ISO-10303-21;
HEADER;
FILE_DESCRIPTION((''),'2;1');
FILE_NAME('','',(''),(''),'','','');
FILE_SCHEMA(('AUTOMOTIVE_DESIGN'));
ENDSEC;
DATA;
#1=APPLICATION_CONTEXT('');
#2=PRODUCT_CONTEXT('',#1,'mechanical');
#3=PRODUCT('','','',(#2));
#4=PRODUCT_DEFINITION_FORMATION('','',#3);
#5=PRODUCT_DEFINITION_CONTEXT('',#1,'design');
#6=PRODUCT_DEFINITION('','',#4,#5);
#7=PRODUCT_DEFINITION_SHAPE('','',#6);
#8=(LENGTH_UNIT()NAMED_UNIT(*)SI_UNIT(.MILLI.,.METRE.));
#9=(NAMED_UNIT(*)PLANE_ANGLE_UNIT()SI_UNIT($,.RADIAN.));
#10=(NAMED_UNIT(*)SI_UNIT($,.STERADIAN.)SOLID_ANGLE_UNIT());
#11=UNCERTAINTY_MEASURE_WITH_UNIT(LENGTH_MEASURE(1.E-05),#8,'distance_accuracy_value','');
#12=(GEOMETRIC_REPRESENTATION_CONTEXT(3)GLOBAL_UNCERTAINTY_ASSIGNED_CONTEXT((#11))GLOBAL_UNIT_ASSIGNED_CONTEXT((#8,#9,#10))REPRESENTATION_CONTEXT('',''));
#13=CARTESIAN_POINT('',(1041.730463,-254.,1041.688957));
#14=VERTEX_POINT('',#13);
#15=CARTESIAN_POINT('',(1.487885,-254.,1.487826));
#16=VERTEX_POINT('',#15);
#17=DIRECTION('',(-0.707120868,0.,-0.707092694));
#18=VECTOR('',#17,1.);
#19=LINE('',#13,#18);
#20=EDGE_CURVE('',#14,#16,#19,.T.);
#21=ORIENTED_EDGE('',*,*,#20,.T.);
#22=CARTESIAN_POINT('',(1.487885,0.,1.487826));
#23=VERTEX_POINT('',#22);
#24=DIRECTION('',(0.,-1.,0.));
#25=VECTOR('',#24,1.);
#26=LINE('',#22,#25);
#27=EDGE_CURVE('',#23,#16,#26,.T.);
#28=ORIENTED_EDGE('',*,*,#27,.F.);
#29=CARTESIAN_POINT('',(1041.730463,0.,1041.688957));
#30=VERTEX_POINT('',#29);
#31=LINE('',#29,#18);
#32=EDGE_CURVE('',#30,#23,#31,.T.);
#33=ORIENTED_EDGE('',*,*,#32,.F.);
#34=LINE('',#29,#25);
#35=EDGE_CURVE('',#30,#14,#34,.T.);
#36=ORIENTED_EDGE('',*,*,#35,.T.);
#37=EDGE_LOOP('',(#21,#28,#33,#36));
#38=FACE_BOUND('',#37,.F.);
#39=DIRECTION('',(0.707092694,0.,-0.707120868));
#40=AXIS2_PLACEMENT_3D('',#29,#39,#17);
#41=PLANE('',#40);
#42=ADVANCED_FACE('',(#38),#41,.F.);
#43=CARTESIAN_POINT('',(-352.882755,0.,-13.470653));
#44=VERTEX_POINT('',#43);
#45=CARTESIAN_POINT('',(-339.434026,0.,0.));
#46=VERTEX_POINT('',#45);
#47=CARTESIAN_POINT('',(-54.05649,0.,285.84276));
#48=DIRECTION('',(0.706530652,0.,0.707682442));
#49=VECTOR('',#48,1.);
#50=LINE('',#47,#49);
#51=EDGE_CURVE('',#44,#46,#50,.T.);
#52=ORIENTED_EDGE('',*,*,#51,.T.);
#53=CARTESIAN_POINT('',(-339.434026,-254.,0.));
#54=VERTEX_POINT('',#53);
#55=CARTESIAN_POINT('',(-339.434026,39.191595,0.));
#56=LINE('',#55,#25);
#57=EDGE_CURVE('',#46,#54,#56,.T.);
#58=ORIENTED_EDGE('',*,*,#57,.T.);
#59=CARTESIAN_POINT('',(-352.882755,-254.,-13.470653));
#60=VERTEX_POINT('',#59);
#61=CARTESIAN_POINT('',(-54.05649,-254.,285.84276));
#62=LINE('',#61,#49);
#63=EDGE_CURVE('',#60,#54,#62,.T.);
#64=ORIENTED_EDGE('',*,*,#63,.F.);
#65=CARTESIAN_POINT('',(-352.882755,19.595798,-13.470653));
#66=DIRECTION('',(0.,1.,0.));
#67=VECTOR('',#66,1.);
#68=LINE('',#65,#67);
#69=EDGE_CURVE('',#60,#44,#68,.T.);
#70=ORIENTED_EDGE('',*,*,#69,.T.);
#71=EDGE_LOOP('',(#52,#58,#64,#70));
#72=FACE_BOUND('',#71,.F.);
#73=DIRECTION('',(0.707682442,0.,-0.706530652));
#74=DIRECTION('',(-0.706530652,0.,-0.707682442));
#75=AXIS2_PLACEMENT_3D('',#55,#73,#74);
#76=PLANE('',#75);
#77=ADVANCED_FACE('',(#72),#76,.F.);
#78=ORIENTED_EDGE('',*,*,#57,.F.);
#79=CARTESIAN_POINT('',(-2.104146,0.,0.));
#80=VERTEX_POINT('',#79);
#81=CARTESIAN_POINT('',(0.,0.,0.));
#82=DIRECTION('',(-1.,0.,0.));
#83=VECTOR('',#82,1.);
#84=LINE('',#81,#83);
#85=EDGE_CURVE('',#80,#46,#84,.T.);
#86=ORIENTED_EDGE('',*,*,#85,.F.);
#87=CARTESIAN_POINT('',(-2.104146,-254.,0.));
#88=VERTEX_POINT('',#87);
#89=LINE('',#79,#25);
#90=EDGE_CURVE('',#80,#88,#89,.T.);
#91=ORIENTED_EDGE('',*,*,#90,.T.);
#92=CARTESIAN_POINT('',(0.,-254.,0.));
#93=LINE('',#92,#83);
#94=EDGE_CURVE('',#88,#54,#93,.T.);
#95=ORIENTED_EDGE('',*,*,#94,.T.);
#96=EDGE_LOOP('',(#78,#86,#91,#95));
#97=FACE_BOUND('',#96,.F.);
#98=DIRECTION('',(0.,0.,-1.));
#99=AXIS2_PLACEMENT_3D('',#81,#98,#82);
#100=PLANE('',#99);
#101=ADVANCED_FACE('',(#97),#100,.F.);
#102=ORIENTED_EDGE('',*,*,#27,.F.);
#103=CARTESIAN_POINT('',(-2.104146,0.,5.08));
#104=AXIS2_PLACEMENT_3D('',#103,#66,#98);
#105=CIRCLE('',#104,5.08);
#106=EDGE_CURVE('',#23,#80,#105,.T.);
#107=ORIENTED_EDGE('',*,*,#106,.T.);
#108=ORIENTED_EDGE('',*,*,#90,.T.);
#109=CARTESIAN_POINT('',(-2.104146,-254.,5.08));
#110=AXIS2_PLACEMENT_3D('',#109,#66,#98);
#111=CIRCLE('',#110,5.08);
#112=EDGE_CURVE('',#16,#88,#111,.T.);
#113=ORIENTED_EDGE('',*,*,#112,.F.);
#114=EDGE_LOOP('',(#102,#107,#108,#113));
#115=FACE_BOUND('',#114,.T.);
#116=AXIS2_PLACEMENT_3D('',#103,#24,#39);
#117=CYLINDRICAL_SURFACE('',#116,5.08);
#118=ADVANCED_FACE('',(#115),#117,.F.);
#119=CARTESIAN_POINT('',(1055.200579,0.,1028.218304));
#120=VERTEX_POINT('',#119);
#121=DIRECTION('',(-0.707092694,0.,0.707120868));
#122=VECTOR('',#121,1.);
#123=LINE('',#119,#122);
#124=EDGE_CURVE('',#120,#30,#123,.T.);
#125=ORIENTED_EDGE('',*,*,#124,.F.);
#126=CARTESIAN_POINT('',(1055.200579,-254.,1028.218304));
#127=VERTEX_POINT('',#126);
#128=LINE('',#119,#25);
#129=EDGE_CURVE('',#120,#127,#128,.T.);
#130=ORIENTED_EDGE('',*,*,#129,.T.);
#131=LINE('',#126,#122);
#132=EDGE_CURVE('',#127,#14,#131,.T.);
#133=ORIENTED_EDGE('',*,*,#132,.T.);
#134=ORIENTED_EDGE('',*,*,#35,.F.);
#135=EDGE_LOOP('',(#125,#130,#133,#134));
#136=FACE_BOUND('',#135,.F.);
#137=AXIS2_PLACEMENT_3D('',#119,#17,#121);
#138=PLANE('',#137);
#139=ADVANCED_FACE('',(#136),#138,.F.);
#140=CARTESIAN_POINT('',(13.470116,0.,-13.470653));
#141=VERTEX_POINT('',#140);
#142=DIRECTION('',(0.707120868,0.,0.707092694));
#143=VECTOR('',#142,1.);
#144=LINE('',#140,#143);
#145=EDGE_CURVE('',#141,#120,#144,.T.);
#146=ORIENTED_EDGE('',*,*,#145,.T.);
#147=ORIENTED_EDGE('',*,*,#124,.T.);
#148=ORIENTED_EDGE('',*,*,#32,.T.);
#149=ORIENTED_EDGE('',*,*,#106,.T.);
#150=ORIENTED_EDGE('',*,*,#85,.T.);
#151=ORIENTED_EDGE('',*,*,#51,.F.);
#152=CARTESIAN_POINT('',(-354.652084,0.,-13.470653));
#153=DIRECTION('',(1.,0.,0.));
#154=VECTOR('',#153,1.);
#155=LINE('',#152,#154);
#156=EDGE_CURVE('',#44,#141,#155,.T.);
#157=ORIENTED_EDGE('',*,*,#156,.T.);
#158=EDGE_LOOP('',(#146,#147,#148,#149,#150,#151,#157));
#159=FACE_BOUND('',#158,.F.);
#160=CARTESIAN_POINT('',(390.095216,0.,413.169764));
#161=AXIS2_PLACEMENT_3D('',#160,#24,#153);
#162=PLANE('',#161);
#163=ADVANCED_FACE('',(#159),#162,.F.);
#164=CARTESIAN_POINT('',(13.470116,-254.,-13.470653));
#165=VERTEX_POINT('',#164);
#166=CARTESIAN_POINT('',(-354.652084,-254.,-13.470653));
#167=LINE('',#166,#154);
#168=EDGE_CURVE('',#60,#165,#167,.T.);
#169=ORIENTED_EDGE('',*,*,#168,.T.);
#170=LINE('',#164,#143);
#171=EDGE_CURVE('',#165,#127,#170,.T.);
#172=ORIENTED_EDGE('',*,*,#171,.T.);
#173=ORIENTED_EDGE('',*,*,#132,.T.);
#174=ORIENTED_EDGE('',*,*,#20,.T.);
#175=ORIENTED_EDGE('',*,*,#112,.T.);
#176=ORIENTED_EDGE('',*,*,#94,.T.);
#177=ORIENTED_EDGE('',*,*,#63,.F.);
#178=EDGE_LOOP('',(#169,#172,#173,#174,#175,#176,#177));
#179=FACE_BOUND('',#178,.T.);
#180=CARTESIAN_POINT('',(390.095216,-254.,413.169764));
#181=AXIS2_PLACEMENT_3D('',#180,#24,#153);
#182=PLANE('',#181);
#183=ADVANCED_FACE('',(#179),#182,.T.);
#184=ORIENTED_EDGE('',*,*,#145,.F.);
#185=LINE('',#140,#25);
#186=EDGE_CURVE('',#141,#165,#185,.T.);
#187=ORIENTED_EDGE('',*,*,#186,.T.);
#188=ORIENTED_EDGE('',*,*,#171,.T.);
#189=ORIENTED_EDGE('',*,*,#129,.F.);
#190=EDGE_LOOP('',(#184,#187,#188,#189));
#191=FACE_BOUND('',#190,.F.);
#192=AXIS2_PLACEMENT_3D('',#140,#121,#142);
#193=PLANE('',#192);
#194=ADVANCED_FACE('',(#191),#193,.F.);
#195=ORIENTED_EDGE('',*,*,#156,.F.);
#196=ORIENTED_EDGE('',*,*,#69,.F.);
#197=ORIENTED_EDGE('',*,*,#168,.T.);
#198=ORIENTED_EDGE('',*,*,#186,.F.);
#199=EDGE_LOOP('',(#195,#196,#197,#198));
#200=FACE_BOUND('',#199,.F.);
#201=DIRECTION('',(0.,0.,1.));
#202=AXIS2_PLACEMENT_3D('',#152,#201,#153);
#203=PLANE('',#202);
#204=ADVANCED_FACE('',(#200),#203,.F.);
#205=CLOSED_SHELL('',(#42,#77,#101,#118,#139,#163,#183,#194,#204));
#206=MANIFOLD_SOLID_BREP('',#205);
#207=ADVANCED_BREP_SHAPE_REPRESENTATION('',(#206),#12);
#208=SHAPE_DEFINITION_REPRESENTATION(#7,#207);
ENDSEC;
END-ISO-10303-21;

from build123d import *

# Parameters (mm, degrees)
F1_DEPTH    = 254
F2_T1_DEPTH = 332.3831903594
F3_R        = 5.08


# Not quite as in the source:
# - a fillet or chamfer that OpenCascade refuses, or shapes differently, is made with other operations: its cross-section is extruded or revolved along the edge and cut away or added


with BuildPart() as f1:
    # F0 (on Front) → F1 (new body)
    with BuildSketch(Plane.XZ):
        Polygon((1041.7304627271, 1041.6889569475), (0, 0), (-354.6740262396, 0), (-354.6520841774, -13.4706525353), (13.4701158226, -13.4706525353), (1055.2005785497, 1028.2183044122), align=None)
    extrude(amount=F1_DEPTH)

    # F2: chamfer of 15.24 on 1 edges, made by hand

    # F2_s2 → F2_t1 (cut)
    with BuildSketch(Plane.XZ.offset(-39.1915951797)):
        Polygon((-339.4340262396, 0), (-354.6492021575, -15.2399797823), (-354.6740262396, 0), align=None)
    extrude(amount=F2_T1_DEPTH, mode=Mode.SUBTRACT)

    # F3
    f3_edges = [f1.edges().sort_by_distance(p)[0] for p in [
        (0, -127, 0),
    ]]
    fillet(f3_edges, radius=F3_R)


solid = f1.part
